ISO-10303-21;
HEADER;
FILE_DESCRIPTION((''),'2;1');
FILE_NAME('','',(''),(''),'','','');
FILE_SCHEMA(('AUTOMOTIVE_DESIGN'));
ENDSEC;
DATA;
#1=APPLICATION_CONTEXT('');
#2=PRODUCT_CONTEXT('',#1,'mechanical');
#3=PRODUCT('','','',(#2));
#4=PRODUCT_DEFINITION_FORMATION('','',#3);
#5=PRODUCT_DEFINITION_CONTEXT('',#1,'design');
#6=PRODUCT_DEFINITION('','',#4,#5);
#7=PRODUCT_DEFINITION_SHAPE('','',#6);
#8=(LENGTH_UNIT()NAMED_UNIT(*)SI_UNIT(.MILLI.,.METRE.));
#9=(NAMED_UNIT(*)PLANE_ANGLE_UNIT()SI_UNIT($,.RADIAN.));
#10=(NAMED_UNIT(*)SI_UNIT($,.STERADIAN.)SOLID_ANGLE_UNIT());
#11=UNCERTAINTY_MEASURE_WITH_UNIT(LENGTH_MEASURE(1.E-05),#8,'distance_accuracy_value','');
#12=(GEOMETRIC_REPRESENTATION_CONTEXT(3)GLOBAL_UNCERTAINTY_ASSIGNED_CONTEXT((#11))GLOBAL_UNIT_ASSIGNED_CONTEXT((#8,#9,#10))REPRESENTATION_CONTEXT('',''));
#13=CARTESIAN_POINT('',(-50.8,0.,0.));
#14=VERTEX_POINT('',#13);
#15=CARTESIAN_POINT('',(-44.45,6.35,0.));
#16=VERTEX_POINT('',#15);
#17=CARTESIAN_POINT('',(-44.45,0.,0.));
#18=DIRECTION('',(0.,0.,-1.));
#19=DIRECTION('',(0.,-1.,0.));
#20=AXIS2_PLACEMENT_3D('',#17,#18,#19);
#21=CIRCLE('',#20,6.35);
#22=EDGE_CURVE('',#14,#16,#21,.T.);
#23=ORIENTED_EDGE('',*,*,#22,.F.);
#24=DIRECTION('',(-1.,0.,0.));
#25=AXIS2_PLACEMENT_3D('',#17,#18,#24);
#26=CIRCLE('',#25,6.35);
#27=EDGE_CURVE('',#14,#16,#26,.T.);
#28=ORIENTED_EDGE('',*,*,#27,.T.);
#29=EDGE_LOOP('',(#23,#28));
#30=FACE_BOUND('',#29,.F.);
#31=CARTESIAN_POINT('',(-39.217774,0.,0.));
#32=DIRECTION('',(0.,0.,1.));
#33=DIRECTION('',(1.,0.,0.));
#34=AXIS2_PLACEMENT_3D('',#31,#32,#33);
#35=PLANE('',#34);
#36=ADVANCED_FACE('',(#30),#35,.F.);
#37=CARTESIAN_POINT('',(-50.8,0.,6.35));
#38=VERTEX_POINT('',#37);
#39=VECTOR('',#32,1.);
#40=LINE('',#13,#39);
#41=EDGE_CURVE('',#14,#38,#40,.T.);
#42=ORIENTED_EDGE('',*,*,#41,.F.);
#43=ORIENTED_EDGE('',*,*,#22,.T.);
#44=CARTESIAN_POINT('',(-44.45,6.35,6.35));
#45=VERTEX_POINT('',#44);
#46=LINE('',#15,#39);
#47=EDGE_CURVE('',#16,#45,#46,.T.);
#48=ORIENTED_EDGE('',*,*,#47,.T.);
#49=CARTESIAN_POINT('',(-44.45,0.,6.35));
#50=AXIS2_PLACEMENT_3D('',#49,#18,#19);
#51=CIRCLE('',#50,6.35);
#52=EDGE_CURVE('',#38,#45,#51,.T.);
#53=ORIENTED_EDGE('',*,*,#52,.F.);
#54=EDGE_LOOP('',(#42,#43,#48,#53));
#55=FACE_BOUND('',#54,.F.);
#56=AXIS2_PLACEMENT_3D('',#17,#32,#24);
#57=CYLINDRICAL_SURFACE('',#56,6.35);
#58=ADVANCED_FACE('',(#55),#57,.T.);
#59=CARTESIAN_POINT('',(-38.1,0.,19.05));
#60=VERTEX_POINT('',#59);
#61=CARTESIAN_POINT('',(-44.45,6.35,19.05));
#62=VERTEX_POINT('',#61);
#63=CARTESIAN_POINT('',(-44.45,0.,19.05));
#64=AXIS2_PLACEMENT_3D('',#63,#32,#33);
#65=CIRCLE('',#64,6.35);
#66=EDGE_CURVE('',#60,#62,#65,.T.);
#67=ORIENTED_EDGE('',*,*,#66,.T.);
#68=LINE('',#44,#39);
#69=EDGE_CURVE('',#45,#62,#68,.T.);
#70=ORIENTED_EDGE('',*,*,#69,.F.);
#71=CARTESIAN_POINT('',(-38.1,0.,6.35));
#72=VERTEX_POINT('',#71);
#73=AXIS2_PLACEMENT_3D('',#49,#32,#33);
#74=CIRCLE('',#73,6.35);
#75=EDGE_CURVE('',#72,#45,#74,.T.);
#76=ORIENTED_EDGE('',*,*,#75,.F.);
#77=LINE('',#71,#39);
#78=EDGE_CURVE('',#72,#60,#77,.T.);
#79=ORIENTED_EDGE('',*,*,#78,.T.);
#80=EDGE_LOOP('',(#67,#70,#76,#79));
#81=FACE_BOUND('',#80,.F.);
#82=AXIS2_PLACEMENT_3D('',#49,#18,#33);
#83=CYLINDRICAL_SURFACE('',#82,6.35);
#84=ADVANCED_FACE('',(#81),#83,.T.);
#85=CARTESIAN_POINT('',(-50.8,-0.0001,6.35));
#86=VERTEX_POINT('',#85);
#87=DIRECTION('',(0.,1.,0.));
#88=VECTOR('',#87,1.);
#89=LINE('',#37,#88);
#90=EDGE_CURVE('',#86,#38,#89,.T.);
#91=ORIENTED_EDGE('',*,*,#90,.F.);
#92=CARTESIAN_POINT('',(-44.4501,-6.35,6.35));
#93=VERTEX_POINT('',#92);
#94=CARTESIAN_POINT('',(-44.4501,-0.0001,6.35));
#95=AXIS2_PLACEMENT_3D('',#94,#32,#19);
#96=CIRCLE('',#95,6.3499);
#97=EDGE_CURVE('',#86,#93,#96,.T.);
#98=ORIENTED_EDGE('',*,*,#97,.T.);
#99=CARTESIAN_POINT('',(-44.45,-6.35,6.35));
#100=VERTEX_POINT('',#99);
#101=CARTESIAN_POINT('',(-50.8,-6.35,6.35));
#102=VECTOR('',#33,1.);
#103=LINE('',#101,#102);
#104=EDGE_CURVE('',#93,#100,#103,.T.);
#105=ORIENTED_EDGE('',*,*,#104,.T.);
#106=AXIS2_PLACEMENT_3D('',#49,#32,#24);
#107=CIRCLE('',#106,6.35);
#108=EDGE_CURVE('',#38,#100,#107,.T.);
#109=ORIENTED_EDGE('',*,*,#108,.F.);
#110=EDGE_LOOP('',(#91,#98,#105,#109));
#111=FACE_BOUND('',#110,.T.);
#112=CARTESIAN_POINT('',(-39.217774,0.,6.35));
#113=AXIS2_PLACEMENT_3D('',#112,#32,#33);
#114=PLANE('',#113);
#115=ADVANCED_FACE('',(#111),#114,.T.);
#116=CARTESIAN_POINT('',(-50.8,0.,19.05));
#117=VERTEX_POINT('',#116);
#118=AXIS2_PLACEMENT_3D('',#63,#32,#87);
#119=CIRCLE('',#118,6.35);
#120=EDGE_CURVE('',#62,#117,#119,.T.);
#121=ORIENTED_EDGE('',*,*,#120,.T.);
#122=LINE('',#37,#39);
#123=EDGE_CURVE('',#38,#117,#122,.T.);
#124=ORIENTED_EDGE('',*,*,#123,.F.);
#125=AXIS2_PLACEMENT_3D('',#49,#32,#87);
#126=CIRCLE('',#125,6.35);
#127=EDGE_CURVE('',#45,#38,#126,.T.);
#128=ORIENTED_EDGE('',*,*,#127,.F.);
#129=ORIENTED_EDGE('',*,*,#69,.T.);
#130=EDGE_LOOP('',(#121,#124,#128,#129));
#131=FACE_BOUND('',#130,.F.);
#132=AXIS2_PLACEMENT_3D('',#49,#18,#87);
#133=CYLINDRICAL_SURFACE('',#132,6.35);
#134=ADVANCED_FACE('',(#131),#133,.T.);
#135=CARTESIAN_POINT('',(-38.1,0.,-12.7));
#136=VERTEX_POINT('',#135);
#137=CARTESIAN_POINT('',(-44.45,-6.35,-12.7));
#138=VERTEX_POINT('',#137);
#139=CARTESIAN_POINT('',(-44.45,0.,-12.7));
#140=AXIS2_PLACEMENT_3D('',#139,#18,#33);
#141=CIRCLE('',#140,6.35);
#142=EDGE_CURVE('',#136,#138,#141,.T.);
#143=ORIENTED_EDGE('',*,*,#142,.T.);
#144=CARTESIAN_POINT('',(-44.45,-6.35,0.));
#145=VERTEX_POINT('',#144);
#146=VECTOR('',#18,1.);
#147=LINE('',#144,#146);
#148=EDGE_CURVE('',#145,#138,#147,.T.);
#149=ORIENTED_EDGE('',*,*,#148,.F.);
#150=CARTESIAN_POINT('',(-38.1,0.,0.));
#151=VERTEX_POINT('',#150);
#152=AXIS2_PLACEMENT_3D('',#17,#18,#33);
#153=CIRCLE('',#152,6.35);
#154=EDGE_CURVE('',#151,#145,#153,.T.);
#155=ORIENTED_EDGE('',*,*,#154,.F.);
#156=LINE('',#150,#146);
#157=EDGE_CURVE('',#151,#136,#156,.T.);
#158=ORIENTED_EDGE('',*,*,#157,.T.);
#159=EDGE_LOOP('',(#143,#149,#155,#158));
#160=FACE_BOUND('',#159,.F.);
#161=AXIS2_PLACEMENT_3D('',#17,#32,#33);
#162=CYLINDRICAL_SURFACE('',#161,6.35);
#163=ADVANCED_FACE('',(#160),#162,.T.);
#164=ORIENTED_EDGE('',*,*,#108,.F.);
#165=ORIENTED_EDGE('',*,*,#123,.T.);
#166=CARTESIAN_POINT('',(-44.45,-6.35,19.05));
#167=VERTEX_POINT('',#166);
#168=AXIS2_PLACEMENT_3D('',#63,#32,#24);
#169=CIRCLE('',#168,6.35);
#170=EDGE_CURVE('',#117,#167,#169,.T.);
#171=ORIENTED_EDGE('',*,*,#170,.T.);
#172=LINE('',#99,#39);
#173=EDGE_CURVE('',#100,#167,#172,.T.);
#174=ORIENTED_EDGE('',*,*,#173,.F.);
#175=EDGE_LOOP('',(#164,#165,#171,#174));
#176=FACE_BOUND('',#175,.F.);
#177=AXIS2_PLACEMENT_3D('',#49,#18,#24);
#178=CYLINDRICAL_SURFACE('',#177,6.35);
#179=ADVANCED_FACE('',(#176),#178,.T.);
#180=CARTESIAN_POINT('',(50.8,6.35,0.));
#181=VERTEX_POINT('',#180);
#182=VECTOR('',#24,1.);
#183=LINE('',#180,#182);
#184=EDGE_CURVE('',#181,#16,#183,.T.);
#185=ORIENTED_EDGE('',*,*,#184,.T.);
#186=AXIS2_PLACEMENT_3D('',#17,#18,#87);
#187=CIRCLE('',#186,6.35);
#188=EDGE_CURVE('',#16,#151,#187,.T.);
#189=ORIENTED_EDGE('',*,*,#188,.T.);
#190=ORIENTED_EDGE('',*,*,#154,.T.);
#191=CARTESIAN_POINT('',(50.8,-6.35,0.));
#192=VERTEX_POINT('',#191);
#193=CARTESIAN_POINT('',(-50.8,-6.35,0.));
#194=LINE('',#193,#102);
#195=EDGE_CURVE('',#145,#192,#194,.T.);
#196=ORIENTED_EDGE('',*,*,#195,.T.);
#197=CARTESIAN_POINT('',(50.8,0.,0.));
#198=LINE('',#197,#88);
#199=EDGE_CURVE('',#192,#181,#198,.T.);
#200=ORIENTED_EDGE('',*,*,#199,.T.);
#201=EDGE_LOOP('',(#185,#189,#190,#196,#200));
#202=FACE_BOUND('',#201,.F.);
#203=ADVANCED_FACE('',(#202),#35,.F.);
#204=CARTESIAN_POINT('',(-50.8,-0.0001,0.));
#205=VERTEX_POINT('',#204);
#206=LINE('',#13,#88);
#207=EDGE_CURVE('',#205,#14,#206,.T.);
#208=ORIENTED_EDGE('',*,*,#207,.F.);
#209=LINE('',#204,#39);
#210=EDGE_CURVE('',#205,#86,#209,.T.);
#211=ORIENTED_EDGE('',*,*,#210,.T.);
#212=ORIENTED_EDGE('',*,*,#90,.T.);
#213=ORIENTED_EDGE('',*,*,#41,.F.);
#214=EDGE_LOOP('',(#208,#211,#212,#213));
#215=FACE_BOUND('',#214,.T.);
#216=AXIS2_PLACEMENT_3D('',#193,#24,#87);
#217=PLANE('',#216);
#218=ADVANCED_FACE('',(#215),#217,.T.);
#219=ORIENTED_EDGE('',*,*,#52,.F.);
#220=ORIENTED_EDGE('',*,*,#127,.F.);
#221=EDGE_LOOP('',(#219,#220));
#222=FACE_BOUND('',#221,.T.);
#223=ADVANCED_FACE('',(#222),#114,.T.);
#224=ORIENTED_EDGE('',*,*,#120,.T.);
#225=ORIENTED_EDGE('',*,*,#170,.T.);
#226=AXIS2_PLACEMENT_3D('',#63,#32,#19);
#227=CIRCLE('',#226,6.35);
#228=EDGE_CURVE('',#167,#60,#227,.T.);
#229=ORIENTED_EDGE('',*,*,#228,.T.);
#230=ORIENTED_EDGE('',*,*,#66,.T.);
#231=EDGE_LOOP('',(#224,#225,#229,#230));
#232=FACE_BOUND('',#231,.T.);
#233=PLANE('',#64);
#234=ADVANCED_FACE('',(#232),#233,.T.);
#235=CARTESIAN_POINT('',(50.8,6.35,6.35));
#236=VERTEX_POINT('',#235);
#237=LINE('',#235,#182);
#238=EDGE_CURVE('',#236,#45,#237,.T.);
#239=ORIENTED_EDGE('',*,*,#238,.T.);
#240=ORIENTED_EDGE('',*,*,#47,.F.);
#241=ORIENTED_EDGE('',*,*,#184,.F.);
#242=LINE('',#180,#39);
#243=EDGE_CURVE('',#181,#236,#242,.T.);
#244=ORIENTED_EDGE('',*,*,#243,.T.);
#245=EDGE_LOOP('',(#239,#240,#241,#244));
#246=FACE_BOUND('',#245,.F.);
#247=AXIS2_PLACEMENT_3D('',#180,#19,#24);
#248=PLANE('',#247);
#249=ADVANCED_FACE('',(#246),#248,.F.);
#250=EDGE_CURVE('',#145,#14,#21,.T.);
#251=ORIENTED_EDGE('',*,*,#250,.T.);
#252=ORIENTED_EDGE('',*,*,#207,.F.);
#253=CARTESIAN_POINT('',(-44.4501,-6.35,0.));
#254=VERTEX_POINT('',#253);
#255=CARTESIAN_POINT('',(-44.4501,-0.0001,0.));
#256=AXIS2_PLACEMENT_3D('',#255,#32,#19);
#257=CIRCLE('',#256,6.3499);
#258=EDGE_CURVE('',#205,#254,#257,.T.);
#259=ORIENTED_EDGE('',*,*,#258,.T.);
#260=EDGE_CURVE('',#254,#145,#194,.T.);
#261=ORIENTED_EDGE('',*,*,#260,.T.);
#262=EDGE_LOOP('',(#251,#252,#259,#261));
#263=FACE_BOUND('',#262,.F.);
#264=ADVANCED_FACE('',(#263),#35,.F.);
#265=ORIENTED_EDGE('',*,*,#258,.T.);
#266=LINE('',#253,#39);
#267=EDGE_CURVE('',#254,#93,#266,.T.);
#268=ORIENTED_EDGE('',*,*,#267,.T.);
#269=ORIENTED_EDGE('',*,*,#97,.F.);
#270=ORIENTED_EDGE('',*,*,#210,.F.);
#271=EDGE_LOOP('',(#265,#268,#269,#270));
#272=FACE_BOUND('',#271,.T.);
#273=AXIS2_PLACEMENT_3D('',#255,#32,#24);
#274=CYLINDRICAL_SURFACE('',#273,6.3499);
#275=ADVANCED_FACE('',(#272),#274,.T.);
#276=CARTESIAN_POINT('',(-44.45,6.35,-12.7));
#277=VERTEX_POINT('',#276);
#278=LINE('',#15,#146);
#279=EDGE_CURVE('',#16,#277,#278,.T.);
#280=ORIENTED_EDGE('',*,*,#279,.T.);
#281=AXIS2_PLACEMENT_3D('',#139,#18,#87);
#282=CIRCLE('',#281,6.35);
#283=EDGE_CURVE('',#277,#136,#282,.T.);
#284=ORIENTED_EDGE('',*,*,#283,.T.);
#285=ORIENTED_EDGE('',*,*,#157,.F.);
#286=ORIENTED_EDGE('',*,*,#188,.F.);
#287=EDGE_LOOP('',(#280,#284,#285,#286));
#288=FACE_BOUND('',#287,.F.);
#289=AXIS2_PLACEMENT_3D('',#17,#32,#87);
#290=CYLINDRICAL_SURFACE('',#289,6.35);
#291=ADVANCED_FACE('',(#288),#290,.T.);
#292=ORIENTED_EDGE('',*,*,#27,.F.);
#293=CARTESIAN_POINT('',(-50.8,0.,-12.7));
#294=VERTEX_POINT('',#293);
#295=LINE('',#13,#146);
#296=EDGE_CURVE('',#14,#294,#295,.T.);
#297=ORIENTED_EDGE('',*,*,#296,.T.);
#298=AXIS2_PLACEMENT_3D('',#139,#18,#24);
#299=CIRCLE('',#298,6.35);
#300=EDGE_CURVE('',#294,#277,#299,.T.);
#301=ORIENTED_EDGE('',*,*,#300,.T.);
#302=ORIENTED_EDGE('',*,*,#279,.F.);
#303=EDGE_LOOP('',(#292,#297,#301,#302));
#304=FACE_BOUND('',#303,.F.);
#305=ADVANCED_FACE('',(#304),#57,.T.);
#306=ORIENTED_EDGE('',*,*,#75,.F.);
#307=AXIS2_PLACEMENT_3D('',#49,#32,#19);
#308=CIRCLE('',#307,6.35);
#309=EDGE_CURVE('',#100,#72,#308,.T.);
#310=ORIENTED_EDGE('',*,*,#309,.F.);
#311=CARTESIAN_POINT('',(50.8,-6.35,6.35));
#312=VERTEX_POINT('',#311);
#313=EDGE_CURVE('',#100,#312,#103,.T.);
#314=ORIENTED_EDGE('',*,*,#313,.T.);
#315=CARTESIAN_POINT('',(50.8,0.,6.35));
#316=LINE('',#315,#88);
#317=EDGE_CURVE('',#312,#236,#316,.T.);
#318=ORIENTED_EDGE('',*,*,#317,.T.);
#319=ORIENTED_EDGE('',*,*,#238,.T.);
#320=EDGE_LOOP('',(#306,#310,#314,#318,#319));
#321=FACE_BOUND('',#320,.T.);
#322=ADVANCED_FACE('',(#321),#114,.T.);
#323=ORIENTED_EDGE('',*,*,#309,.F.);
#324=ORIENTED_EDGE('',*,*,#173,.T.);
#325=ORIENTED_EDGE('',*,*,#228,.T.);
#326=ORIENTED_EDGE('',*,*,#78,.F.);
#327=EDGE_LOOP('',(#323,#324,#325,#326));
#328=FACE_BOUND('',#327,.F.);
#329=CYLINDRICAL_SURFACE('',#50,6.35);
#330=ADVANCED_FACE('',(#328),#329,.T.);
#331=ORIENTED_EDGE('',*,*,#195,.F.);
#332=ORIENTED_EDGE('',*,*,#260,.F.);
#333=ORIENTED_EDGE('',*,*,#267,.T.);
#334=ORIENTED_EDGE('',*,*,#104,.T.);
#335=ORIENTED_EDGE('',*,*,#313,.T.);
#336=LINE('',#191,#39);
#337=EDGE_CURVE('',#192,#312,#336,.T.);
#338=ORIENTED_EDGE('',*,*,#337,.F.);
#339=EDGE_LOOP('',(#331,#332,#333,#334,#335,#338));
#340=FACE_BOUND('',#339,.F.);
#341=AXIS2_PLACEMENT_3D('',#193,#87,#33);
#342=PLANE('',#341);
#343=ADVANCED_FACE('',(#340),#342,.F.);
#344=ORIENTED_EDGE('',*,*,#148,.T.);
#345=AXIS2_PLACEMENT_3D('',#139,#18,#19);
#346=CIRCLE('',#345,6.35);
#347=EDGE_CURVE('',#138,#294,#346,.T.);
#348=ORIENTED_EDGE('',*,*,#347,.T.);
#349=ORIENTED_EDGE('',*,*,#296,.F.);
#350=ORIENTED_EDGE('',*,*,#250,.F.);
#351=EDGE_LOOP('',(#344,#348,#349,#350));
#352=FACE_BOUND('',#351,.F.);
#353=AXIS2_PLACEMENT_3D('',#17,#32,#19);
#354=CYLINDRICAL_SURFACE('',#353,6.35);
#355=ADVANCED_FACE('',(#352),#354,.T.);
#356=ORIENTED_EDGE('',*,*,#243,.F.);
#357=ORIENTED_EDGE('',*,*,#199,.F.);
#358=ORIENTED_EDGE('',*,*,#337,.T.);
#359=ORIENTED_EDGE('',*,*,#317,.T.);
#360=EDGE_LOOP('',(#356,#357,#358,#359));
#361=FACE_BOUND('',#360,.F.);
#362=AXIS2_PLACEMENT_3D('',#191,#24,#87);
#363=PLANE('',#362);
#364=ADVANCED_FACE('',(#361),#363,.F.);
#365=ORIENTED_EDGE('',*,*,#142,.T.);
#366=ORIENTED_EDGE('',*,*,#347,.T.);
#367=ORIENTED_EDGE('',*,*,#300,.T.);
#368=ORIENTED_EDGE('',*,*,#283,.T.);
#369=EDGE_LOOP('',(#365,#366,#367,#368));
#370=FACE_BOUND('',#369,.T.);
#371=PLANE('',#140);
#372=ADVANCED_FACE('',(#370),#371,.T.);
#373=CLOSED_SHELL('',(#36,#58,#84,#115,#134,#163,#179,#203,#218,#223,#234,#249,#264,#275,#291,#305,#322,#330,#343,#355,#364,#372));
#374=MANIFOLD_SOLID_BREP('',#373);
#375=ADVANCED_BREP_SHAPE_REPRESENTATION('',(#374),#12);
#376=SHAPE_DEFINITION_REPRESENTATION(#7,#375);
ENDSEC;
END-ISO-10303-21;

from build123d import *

# Parameters (mm, degrees)
F0_W     = 23.1644526571
F0_H     = 12.7
F0_W_2   = 78.4355473429
F1_DEPTH = 6.35
F3_DEPTH = 12.7
F5_DEPTH = 12.7
F6_R     = 6.35
F7_R     = 6.3499
F8_R     = 6.35
F9_DEPTH = 25.4


# Not quite as in the source:
# - a fillet or chamfer is up to 0.001 mm smaller than in the source, because OpenCascade refuses the exact size


with BuildPart() as f1:
    # F0 (on Top) → F1 (new body)
    with BuildSketch(Plane.XY):
        with Locations((-39.2177736714, 0)):
            Rectangle(F0_W, F0_H)
        with Locations((11.5822263286, 0)):
            Rectangle(F0_W_2, F0_H)
    extrude(amount=F1_DEPTH)

    # F2 (on face) → F3 (join)
    with BuildSketch(Plane(origin=(0, 0, 0), x_dir=(1, 0, 0), z_dir=(0, 0, -1))):
        with BuildLine():
            ThreePointArc((-44.45, -6.35), (-39.9598719395, -4.4901280605), (-38.1, 0))
            ThreePointArc((-38.1, 0), (-39.9598719395, 4.4901280605), (-44.45, 6.35))
            ThreePointArc((-44.45, 6.35), (-48.9401280605, 4.4901280605), (-50.8, 0))
            ThreePointArc((-50.8, 0), (-48.9401280605, -4.4901280605), (-44.45, -6.35))
        make_face()
    extrude(amount=F3_DEPTH)

    # F4 (on face) → F5 (join)
    with BuildSketch(Plane.XY.offset(6.35)):
        with BuildLine():
            ThreePointArc((-44.45, -6.35), (-39.9598719395, -4.4901280605), (-38.1, 0))
            ThreePointArc((-38.1, 0), (-39.9598719395, 4.4901280605), (-44.45, 6.35))
            ThreePointArc((-44.45, 6.35), (-48.9401280605, 4.4901280605), (-50.8, 0))
            ThreePointArc((-50.8, 0), (-48.9401280605, -4.4901280605), (-44.45, -6.35))
        make_face()
    extrude(amount=F5_DEPTH)

    # F6
    f6_edges = [f1.edges().sort_by_distance(p)[0] for p in [
        (-50.8, 6.35, 3.175),
    ]]
    fillet(f6_edges, radius=F6_R)

    # F7 (radius 6.35 in the source; OpenCascade refuses exactly that, so slightly less here)
    f7_edges = [f1.edges().sort_by_distance(p)[0] for p in [
        (-50.8, -6.35, 3.175),
    ]]
    fillet(f7_edges, radius=F7_R)

    # F8 (on face) → F9 (cut)
    with BuildSketch(Plane.XY.offset(6.35)):
        with Locations((63.4561311297, 1.0546775941)):
            Circle(F8_R)
    extrude(amount=-F9_DEPTH, mode=Mode.SUBTRACT)


solid = f1.part
